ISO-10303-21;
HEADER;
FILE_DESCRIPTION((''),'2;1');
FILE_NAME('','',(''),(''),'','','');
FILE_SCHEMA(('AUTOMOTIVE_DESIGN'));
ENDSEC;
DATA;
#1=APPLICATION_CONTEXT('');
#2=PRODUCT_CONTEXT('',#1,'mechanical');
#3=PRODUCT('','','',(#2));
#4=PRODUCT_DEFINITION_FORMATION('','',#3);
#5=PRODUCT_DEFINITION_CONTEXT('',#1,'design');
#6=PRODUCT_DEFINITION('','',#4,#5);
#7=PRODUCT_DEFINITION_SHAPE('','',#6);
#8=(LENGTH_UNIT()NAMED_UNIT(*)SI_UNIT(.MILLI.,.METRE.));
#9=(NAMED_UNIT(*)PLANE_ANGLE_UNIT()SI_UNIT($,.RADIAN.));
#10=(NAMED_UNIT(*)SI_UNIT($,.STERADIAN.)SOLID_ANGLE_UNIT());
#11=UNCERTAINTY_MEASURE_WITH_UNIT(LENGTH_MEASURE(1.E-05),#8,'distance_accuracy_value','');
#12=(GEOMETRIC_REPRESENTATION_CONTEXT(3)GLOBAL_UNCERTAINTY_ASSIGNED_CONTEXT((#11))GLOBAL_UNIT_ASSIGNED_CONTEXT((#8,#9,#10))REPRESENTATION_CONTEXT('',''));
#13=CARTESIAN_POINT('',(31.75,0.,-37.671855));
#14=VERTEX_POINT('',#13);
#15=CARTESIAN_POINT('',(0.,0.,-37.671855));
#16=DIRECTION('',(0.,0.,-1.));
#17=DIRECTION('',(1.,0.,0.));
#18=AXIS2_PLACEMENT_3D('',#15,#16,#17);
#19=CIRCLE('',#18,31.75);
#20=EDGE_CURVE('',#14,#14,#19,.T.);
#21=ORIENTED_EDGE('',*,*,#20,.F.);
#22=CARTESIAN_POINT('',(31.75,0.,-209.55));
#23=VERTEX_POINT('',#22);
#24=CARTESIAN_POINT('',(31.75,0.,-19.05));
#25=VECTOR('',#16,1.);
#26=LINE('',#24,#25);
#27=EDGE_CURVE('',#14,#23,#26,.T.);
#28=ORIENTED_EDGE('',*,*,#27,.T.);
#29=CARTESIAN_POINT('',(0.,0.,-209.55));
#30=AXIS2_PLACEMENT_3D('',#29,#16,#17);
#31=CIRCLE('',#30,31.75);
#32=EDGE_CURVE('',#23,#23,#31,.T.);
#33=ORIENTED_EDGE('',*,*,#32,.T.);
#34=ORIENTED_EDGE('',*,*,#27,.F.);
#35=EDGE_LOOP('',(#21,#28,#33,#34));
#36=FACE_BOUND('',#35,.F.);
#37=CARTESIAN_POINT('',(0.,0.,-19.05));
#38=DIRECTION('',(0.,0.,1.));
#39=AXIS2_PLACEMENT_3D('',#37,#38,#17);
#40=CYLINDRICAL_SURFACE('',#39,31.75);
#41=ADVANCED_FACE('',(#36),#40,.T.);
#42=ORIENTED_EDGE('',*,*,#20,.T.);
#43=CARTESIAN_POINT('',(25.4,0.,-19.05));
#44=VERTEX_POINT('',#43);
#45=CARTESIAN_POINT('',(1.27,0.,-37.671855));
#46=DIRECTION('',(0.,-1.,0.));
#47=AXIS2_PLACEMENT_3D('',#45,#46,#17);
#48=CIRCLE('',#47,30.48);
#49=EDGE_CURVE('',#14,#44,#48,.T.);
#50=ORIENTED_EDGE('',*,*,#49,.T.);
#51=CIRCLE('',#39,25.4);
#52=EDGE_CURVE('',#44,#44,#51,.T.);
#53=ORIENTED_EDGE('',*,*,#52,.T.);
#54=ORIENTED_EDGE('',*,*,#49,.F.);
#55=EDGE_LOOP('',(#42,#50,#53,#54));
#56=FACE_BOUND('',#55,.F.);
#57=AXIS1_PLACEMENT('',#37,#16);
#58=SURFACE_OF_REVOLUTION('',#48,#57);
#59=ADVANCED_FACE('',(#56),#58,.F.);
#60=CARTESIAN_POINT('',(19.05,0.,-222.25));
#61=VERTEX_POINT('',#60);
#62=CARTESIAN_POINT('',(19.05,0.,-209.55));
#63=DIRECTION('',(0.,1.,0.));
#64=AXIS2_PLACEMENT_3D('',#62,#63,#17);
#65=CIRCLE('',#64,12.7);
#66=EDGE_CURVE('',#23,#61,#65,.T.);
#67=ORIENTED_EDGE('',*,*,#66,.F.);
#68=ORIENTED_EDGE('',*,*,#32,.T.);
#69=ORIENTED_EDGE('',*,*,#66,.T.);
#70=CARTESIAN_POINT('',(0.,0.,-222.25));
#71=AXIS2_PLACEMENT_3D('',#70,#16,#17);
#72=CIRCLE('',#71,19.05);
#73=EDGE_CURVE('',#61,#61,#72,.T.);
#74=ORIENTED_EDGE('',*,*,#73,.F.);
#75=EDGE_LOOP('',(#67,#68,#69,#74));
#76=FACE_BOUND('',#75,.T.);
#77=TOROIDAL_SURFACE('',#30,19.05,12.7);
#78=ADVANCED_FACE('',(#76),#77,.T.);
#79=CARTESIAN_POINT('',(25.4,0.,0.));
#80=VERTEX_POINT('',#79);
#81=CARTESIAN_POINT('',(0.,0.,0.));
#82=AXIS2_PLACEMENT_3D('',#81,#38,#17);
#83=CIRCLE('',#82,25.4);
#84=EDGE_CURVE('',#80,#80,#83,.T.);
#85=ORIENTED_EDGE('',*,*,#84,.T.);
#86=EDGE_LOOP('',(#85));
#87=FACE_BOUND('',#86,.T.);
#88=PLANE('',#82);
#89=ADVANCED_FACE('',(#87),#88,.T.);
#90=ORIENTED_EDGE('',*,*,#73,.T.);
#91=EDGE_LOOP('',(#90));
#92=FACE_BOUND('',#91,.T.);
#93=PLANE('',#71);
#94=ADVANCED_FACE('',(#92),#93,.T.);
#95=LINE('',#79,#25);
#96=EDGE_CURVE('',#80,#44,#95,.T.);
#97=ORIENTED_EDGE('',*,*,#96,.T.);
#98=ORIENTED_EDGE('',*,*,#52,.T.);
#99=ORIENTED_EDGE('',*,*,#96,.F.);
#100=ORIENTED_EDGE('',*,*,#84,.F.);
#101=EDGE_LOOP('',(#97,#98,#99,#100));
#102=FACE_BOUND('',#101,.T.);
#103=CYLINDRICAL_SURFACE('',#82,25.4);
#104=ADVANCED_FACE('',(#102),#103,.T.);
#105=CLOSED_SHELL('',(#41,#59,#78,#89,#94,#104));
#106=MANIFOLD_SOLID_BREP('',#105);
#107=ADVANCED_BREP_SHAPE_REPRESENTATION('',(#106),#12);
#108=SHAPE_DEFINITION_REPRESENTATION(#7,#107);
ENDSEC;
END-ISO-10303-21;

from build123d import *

# Parameters (mm, degrees)
F0_R     = 25.4
F1_DEPTH = 19.05
F2_R     = 31.75
F3_DEPTH = 203.2
F4_R     = 12.7


# Not quite as in the source:
# - a fillet or chamfer that OpenCascade refuses, or shapes differently, is made with other operations: its cross-section is extruded or revolved along the edge and cut away or added


with BuildPart() as f1:
    # F0 (on Top) → F1 (new body)
    with BuildSketch(Plane.XY):
        Circle(F0_R)
    extrude(amount=-F1_DEPTH)

    # F2 (on face) → F3 (join)
    with BuildSketch(Plane(origin=(0, 0, -19.05), x_dir=(1, 0, 0), z_dir=(0, 0, -1))):
        Circle(F2_R)
    extrude(amount=F3_DEPTH)

    # F4
    f4_edges = [f1.edges().sort_by_distance(p)[0] for p in [
        (-31.75, 0, -222.25),
    ]]
    fillet(f4_edges, radius=F4_R)

    # F5: fillet of radius 30.48 on 1 edges, made by hand

    # F5_s1 → F5_t2 (revolve, cut)
    with BuildSketch(Plane.XZ):
        with BuildLine():
            ThreePointArc((31.75, -37.6718554392), (30.1188543967, -27.8344777399), (25.4, -19.05))
            Line((25.4, -19.05), (31.75, -19.05))
            Line((31.75, -19.05), (31.75, -37.6718554392))
        make_face()
    revolve(axis=Axis((0, 0, -19.05), (0, 0, -1)), mode=Mode.SUBTRACT)


solid = f1.part
